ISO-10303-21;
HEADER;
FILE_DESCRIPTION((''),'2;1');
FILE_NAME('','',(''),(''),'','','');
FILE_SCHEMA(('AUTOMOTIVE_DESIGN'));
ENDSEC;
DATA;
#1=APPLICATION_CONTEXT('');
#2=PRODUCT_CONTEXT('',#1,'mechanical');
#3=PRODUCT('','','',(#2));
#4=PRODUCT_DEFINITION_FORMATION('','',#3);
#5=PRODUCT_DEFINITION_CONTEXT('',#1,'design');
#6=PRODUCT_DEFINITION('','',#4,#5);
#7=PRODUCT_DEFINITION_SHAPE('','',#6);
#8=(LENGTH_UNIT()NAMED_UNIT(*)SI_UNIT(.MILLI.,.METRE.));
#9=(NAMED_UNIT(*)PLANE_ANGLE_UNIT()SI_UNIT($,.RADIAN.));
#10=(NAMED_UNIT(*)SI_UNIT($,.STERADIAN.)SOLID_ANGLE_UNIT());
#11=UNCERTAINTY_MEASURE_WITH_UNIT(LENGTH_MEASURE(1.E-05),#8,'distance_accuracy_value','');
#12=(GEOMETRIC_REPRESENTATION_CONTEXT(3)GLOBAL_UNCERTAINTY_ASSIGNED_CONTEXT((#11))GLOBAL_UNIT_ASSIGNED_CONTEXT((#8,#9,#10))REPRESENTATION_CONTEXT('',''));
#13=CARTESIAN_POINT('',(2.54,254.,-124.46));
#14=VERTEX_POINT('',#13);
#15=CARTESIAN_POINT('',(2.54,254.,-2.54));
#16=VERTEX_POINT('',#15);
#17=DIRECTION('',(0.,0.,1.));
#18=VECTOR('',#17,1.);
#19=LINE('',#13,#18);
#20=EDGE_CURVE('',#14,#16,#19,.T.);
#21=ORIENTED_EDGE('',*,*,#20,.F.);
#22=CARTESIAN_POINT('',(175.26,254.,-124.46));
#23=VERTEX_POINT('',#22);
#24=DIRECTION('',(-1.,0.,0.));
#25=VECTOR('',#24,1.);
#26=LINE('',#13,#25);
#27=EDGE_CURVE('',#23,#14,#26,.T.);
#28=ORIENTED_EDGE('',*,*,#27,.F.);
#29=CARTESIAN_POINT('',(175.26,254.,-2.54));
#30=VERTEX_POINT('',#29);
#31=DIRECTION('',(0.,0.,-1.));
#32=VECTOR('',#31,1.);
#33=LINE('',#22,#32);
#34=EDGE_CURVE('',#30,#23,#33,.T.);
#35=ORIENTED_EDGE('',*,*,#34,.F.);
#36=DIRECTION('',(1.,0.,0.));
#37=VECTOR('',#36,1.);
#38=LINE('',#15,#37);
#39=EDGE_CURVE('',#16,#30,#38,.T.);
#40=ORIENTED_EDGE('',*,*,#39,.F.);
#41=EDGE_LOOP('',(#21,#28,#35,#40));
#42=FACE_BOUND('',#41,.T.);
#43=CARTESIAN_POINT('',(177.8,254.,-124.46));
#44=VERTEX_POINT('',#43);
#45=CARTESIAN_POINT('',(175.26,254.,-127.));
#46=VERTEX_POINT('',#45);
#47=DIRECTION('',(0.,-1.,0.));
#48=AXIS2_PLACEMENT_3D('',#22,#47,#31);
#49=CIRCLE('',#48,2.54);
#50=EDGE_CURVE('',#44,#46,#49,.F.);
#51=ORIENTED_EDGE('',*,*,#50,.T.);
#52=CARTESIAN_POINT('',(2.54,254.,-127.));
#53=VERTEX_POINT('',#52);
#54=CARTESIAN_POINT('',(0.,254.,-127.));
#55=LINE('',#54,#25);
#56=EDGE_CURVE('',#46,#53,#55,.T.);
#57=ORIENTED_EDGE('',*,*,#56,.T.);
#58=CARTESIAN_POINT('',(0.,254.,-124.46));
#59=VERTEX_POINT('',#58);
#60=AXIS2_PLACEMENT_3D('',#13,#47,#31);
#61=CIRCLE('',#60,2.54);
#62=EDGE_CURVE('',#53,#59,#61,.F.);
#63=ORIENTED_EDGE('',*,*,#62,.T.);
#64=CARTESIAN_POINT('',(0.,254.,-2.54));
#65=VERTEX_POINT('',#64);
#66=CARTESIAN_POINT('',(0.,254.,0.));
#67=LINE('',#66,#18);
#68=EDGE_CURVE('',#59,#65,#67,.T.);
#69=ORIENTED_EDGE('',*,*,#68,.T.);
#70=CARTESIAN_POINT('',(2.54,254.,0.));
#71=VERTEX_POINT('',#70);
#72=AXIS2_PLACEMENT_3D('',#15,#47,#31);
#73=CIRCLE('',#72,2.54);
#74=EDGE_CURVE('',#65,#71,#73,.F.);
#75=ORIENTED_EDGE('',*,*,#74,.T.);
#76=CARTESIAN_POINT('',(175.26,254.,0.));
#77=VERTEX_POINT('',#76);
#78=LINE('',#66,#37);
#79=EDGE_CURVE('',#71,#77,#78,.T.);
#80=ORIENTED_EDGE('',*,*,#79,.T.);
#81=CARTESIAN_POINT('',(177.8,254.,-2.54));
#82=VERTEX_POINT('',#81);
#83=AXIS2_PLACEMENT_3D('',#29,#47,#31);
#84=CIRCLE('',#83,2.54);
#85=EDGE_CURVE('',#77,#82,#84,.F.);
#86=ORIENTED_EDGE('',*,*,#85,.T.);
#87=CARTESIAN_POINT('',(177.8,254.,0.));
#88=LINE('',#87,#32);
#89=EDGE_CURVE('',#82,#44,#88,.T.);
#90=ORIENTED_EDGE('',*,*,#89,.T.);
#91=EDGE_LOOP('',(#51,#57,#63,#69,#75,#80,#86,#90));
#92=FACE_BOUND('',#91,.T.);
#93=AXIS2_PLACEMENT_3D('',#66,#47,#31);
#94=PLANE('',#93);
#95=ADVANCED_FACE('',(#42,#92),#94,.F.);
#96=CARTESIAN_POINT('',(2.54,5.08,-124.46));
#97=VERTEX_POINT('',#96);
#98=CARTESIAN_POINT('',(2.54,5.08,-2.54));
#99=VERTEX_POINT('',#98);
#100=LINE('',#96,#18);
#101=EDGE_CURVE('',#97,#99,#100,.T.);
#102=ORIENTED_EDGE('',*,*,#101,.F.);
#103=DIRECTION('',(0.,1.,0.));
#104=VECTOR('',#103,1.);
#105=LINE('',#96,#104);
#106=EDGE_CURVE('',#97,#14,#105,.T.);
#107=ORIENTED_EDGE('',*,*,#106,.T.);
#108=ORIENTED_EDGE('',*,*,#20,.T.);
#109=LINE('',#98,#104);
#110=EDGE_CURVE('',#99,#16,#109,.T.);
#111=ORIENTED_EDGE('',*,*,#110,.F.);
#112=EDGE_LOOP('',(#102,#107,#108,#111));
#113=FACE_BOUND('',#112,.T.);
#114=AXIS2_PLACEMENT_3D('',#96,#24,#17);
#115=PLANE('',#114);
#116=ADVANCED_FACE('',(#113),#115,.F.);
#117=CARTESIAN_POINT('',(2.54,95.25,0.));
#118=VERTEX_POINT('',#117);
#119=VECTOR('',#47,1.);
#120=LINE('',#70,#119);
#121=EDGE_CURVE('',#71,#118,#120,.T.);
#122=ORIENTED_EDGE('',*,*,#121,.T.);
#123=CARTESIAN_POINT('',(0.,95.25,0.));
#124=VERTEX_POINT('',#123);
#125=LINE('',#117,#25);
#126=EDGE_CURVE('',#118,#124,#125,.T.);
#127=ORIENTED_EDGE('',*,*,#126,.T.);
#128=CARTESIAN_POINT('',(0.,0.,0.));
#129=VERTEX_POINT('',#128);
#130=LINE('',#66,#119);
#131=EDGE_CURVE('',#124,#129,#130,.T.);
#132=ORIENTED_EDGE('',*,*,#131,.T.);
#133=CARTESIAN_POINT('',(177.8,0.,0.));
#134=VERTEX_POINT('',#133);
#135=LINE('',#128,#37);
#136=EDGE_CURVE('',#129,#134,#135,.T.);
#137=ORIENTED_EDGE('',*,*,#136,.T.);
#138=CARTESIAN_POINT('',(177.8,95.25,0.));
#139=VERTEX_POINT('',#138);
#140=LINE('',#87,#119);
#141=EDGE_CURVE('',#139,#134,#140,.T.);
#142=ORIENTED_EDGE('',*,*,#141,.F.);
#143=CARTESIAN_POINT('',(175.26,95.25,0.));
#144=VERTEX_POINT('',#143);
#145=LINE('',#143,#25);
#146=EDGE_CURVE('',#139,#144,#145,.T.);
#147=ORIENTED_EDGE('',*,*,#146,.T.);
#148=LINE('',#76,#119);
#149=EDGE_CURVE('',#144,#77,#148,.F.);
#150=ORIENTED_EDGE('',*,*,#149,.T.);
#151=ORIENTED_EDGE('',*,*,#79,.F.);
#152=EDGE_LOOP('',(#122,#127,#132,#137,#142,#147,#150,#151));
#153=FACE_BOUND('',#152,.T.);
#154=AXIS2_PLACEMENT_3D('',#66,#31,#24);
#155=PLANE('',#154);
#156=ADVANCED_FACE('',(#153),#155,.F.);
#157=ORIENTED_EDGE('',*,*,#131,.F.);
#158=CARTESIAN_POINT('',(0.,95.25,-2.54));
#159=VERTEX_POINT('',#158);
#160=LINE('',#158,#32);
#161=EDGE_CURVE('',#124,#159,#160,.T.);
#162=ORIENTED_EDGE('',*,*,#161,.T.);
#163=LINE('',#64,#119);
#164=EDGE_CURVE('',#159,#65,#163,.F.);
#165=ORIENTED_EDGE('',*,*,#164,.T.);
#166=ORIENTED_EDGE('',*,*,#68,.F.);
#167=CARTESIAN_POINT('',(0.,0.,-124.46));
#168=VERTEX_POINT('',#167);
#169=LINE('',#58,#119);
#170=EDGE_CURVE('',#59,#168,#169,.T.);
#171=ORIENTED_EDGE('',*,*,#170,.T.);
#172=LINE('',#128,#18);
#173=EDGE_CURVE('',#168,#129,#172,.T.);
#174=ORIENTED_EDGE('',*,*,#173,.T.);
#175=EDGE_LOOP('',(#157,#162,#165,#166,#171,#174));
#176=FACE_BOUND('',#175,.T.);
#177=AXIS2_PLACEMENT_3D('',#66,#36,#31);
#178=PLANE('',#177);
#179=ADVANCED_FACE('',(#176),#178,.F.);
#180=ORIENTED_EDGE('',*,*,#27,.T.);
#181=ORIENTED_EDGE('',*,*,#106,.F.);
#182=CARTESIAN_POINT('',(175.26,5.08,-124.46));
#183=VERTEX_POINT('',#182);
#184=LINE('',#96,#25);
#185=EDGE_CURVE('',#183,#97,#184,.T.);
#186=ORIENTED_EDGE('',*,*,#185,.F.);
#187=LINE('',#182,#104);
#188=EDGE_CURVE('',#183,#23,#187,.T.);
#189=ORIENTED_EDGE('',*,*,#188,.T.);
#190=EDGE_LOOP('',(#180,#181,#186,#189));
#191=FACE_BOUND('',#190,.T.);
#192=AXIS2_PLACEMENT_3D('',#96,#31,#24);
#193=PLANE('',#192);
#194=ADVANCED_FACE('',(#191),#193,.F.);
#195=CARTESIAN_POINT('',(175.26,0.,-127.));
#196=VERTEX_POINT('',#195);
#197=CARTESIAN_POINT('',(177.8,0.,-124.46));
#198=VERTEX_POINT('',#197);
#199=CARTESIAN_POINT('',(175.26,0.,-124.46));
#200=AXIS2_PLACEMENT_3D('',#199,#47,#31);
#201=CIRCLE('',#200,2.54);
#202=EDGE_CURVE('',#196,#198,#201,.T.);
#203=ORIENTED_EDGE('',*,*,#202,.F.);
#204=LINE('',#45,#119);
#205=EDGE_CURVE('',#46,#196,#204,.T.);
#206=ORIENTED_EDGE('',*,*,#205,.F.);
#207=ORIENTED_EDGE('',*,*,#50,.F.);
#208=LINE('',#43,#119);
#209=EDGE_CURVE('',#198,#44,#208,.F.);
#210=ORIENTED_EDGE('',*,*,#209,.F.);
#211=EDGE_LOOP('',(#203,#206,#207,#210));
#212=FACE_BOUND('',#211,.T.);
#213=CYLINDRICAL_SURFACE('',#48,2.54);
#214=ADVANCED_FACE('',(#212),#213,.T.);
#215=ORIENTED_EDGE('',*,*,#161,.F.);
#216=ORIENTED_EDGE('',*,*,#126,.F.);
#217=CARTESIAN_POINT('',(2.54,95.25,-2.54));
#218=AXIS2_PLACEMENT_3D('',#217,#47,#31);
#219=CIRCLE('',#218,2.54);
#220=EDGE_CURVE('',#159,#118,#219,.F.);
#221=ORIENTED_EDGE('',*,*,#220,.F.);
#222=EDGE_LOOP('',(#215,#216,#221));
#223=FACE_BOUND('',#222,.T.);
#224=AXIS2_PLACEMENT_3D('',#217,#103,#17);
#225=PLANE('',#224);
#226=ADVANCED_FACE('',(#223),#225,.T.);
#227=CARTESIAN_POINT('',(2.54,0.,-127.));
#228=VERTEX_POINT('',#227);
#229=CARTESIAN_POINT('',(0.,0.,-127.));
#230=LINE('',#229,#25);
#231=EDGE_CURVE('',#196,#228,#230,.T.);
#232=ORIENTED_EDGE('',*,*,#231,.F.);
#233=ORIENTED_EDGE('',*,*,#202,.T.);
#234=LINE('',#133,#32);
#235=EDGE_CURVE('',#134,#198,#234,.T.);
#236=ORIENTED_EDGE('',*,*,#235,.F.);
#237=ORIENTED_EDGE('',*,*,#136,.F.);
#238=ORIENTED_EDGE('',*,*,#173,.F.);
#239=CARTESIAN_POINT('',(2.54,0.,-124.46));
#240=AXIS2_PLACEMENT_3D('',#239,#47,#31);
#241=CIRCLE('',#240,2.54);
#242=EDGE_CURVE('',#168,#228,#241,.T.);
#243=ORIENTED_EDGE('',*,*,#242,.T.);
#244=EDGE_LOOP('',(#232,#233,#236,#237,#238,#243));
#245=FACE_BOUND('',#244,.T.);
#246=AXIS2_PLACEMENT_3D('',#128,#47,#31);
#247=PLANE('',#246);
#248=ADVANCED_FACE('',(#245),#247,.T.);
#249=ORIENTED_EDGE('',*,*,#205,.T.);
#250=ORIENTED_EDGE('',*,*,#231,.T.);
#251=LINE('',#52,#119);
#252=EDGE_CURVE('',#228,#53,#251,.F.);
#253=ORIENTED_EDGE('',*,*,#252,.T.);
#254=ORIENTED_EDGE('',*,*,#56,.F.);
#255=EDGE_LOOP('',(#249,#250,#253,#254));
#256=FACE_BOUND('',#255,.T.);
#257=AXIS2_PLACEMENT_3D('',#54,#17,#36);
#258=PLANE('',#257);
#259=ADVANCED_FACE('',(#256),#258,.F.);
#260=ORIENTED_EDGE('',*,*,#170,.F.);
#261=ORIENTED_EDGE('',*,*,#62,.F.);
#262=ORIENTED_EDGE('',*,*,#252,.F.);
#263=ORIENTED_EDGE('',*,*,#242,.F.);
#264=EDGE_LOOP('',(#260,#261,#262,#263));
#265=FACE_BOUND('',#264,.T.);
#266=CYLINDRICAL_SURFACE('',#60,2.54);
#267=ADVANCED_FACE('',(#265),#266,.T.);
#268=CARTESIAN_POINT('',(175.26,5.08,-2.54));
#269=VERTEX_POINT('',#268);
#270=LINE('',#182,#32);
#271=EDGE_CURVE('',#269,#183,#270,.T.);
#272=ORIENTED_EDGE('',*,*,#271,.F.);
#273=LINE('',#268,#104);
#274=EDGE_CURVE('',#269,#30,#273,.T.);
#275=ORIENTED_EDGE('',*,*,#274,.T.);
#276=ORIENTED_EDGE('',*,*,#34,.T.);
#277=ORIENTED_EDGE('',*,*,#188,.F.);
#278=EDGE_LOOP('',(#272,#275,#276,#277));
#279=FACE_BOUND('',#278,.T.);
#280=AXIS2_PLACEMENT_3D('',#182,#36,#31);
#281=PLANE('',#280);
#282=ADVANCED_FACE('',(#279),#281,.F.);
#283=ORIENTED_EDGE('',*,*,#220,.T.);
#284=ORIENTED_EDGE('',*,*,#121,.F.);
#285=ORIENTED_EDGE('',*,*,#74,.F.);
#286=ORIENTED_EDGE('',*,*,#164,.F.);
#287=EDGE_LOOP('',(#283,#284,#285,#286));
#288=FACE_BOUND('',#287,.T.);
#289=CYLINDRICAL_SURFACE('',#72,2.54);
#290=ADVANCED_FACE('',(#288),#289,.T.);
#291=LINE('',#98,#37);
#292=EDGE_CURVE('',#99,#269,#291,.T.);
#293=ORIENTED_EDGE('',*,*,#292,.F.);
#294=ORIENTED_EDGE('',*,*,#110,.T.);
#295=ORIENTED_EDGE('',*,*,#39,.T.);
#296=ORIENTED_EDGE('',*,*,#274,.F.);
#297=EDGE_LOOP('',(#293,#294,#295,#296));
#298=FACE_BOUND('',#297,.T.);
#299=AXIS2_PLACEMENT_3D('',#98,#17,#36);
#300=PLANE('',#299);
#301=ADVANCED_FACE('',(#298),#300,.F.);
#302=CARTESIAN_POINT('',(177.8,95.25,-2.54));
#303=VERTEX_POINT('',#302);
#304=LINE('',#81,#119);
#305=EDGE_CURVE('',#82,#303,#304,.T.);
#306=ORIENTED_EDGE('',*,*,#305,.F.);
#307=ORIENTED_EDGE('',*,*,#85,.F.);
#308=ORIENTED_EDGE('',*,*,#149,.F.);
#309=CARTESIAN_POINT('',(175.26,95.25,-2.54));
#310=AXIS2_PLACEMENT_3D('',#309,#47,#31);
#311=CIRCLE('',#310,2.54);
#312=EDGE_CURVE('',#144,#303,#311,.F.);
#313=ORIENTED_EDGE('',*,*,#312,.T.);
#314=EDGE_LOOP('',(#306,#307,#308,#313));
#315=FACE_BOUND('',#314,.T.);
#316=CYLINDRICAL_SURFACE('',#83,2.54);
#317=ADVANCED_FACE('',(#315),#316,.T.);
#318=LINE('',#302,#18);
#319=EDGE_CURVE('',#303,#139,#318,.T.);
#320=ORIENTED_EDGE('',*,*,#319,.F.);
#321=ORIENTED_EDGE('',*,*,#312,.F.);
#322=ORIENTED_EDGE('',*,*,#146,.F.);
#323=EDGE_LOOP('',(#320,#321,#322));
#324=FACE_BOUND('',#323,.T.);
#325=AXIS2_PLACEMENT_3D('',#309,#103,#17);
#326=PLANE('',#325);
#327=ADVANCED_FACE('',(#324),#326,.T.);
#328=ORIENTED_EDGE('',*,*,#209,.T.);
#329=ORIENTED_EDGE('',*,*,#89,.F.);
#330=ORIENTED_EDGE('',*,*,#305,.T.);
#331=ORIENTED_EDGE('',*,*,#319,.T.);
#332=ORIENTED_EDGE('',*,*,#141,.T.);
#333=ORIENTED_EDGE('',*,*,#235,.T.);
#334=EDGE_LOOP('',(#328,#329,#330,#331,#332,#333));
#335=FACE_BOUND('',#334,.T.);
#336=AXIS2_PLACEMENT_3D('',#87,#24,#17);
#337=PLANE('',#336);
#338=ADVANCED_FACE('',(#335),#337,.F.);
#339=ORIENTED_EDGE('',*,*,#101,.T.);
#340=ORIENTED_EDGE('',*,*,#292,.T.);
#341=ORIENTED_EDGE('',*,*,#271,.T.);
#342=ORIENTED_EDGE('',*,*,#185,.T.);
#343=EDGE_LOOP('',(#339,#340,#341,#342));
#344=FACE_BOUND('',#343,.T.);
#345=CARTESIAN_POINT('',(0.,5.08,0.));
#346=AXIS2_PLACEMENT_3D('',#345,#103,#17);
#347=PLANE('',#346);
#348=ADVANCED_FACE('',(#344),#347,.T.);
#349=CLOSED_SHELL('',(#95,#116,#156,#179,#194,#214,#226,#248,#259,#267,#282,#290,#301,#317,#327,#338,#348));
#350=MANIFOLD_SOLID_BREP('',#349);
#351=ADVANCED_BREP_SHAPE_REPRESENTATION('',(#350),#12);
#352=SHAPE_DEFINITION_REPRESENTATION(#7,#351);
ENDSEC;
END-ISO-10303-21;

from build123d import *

# Parameters (mm, degrees)
SKETCH1_W           = 177.8
SKETCH1_H           = 127
BOSS_EXTRUDE1_DEPTH = 254
SKETCH2_W           = 172.72
SKETCH2_H           = 121.92
CUT_EXTRUDE1_DEPTH  = 248.92
FILLET2_R           = 2.54
FILLET3_START       = 95.25
FILLET3_DEPTH       = 159.75


with BuildPart() as part:
    # Sketch1 → Boss-Extrude1 (new body)
    with BuildSketch(Plane(origin=(0, 0, 0), x_dir=(1, 0, 0), z_dir=(0, 1, 0))):
        with Locations((88.9, 63.5)):
            Rectangle(SKETCH1_W, SKETCH1_H)
    extrude(amount=BOSS_EXTRUDE1_DEPTH)

    # Sketch2 → Cut-Extrude1 (cut)
    with BuildSketch(Plane(origin=(0, 254, 0), x_dir=(1, 0, 0), z_dir=(0, 1, 0))):
        with Locations((88.9, 63.5)):
            Rectangle(SKETCH2_W, SKETCH2_H)
    extrude(amount=-CUT_EXTRUDE1_DEPTH, mode=Mode.SUBTRACT)

    # Fillet2
    fillet2_edges = [part.edges().sort_by_distance(p)[0] for p in [
        (0, 127, -127),
        (177.8, 127, -127),
    ]]
    fillet(fillet2_edges, radius=FILLET2_R)

    # Fillet3: read off the stored shape, not the designer's step
    # Fillet3 outline → Fillet3 (cut)
    with BuildSketch(Plane(origin=(0, 0, 0), x_dir=(1, 0, 0), z_dir=(0, 1, 0)).offset(FILLET3_START)):
        with BuildLine():
            Line((0, 0), (2.54, 0))
            ThreePointArc((2.54, 0), (0.743948776, 0.743948776), (0, 2.54))
            Line((0, 2.54), (0, 0))
        make_face()
        with BuildLine():
            ThreePointArc((177.8, 2.54), (177.056051224, 0.743948776), (175.26, 0))
            Line((175.26, 0), (177.8, 0))
            Line((177.8, 0), (177.8, 2.54))
        make_face()
    extrude(amount=FILLET3_DEPTH, mode=Mode.SUBTRACT)


solid = part.part
